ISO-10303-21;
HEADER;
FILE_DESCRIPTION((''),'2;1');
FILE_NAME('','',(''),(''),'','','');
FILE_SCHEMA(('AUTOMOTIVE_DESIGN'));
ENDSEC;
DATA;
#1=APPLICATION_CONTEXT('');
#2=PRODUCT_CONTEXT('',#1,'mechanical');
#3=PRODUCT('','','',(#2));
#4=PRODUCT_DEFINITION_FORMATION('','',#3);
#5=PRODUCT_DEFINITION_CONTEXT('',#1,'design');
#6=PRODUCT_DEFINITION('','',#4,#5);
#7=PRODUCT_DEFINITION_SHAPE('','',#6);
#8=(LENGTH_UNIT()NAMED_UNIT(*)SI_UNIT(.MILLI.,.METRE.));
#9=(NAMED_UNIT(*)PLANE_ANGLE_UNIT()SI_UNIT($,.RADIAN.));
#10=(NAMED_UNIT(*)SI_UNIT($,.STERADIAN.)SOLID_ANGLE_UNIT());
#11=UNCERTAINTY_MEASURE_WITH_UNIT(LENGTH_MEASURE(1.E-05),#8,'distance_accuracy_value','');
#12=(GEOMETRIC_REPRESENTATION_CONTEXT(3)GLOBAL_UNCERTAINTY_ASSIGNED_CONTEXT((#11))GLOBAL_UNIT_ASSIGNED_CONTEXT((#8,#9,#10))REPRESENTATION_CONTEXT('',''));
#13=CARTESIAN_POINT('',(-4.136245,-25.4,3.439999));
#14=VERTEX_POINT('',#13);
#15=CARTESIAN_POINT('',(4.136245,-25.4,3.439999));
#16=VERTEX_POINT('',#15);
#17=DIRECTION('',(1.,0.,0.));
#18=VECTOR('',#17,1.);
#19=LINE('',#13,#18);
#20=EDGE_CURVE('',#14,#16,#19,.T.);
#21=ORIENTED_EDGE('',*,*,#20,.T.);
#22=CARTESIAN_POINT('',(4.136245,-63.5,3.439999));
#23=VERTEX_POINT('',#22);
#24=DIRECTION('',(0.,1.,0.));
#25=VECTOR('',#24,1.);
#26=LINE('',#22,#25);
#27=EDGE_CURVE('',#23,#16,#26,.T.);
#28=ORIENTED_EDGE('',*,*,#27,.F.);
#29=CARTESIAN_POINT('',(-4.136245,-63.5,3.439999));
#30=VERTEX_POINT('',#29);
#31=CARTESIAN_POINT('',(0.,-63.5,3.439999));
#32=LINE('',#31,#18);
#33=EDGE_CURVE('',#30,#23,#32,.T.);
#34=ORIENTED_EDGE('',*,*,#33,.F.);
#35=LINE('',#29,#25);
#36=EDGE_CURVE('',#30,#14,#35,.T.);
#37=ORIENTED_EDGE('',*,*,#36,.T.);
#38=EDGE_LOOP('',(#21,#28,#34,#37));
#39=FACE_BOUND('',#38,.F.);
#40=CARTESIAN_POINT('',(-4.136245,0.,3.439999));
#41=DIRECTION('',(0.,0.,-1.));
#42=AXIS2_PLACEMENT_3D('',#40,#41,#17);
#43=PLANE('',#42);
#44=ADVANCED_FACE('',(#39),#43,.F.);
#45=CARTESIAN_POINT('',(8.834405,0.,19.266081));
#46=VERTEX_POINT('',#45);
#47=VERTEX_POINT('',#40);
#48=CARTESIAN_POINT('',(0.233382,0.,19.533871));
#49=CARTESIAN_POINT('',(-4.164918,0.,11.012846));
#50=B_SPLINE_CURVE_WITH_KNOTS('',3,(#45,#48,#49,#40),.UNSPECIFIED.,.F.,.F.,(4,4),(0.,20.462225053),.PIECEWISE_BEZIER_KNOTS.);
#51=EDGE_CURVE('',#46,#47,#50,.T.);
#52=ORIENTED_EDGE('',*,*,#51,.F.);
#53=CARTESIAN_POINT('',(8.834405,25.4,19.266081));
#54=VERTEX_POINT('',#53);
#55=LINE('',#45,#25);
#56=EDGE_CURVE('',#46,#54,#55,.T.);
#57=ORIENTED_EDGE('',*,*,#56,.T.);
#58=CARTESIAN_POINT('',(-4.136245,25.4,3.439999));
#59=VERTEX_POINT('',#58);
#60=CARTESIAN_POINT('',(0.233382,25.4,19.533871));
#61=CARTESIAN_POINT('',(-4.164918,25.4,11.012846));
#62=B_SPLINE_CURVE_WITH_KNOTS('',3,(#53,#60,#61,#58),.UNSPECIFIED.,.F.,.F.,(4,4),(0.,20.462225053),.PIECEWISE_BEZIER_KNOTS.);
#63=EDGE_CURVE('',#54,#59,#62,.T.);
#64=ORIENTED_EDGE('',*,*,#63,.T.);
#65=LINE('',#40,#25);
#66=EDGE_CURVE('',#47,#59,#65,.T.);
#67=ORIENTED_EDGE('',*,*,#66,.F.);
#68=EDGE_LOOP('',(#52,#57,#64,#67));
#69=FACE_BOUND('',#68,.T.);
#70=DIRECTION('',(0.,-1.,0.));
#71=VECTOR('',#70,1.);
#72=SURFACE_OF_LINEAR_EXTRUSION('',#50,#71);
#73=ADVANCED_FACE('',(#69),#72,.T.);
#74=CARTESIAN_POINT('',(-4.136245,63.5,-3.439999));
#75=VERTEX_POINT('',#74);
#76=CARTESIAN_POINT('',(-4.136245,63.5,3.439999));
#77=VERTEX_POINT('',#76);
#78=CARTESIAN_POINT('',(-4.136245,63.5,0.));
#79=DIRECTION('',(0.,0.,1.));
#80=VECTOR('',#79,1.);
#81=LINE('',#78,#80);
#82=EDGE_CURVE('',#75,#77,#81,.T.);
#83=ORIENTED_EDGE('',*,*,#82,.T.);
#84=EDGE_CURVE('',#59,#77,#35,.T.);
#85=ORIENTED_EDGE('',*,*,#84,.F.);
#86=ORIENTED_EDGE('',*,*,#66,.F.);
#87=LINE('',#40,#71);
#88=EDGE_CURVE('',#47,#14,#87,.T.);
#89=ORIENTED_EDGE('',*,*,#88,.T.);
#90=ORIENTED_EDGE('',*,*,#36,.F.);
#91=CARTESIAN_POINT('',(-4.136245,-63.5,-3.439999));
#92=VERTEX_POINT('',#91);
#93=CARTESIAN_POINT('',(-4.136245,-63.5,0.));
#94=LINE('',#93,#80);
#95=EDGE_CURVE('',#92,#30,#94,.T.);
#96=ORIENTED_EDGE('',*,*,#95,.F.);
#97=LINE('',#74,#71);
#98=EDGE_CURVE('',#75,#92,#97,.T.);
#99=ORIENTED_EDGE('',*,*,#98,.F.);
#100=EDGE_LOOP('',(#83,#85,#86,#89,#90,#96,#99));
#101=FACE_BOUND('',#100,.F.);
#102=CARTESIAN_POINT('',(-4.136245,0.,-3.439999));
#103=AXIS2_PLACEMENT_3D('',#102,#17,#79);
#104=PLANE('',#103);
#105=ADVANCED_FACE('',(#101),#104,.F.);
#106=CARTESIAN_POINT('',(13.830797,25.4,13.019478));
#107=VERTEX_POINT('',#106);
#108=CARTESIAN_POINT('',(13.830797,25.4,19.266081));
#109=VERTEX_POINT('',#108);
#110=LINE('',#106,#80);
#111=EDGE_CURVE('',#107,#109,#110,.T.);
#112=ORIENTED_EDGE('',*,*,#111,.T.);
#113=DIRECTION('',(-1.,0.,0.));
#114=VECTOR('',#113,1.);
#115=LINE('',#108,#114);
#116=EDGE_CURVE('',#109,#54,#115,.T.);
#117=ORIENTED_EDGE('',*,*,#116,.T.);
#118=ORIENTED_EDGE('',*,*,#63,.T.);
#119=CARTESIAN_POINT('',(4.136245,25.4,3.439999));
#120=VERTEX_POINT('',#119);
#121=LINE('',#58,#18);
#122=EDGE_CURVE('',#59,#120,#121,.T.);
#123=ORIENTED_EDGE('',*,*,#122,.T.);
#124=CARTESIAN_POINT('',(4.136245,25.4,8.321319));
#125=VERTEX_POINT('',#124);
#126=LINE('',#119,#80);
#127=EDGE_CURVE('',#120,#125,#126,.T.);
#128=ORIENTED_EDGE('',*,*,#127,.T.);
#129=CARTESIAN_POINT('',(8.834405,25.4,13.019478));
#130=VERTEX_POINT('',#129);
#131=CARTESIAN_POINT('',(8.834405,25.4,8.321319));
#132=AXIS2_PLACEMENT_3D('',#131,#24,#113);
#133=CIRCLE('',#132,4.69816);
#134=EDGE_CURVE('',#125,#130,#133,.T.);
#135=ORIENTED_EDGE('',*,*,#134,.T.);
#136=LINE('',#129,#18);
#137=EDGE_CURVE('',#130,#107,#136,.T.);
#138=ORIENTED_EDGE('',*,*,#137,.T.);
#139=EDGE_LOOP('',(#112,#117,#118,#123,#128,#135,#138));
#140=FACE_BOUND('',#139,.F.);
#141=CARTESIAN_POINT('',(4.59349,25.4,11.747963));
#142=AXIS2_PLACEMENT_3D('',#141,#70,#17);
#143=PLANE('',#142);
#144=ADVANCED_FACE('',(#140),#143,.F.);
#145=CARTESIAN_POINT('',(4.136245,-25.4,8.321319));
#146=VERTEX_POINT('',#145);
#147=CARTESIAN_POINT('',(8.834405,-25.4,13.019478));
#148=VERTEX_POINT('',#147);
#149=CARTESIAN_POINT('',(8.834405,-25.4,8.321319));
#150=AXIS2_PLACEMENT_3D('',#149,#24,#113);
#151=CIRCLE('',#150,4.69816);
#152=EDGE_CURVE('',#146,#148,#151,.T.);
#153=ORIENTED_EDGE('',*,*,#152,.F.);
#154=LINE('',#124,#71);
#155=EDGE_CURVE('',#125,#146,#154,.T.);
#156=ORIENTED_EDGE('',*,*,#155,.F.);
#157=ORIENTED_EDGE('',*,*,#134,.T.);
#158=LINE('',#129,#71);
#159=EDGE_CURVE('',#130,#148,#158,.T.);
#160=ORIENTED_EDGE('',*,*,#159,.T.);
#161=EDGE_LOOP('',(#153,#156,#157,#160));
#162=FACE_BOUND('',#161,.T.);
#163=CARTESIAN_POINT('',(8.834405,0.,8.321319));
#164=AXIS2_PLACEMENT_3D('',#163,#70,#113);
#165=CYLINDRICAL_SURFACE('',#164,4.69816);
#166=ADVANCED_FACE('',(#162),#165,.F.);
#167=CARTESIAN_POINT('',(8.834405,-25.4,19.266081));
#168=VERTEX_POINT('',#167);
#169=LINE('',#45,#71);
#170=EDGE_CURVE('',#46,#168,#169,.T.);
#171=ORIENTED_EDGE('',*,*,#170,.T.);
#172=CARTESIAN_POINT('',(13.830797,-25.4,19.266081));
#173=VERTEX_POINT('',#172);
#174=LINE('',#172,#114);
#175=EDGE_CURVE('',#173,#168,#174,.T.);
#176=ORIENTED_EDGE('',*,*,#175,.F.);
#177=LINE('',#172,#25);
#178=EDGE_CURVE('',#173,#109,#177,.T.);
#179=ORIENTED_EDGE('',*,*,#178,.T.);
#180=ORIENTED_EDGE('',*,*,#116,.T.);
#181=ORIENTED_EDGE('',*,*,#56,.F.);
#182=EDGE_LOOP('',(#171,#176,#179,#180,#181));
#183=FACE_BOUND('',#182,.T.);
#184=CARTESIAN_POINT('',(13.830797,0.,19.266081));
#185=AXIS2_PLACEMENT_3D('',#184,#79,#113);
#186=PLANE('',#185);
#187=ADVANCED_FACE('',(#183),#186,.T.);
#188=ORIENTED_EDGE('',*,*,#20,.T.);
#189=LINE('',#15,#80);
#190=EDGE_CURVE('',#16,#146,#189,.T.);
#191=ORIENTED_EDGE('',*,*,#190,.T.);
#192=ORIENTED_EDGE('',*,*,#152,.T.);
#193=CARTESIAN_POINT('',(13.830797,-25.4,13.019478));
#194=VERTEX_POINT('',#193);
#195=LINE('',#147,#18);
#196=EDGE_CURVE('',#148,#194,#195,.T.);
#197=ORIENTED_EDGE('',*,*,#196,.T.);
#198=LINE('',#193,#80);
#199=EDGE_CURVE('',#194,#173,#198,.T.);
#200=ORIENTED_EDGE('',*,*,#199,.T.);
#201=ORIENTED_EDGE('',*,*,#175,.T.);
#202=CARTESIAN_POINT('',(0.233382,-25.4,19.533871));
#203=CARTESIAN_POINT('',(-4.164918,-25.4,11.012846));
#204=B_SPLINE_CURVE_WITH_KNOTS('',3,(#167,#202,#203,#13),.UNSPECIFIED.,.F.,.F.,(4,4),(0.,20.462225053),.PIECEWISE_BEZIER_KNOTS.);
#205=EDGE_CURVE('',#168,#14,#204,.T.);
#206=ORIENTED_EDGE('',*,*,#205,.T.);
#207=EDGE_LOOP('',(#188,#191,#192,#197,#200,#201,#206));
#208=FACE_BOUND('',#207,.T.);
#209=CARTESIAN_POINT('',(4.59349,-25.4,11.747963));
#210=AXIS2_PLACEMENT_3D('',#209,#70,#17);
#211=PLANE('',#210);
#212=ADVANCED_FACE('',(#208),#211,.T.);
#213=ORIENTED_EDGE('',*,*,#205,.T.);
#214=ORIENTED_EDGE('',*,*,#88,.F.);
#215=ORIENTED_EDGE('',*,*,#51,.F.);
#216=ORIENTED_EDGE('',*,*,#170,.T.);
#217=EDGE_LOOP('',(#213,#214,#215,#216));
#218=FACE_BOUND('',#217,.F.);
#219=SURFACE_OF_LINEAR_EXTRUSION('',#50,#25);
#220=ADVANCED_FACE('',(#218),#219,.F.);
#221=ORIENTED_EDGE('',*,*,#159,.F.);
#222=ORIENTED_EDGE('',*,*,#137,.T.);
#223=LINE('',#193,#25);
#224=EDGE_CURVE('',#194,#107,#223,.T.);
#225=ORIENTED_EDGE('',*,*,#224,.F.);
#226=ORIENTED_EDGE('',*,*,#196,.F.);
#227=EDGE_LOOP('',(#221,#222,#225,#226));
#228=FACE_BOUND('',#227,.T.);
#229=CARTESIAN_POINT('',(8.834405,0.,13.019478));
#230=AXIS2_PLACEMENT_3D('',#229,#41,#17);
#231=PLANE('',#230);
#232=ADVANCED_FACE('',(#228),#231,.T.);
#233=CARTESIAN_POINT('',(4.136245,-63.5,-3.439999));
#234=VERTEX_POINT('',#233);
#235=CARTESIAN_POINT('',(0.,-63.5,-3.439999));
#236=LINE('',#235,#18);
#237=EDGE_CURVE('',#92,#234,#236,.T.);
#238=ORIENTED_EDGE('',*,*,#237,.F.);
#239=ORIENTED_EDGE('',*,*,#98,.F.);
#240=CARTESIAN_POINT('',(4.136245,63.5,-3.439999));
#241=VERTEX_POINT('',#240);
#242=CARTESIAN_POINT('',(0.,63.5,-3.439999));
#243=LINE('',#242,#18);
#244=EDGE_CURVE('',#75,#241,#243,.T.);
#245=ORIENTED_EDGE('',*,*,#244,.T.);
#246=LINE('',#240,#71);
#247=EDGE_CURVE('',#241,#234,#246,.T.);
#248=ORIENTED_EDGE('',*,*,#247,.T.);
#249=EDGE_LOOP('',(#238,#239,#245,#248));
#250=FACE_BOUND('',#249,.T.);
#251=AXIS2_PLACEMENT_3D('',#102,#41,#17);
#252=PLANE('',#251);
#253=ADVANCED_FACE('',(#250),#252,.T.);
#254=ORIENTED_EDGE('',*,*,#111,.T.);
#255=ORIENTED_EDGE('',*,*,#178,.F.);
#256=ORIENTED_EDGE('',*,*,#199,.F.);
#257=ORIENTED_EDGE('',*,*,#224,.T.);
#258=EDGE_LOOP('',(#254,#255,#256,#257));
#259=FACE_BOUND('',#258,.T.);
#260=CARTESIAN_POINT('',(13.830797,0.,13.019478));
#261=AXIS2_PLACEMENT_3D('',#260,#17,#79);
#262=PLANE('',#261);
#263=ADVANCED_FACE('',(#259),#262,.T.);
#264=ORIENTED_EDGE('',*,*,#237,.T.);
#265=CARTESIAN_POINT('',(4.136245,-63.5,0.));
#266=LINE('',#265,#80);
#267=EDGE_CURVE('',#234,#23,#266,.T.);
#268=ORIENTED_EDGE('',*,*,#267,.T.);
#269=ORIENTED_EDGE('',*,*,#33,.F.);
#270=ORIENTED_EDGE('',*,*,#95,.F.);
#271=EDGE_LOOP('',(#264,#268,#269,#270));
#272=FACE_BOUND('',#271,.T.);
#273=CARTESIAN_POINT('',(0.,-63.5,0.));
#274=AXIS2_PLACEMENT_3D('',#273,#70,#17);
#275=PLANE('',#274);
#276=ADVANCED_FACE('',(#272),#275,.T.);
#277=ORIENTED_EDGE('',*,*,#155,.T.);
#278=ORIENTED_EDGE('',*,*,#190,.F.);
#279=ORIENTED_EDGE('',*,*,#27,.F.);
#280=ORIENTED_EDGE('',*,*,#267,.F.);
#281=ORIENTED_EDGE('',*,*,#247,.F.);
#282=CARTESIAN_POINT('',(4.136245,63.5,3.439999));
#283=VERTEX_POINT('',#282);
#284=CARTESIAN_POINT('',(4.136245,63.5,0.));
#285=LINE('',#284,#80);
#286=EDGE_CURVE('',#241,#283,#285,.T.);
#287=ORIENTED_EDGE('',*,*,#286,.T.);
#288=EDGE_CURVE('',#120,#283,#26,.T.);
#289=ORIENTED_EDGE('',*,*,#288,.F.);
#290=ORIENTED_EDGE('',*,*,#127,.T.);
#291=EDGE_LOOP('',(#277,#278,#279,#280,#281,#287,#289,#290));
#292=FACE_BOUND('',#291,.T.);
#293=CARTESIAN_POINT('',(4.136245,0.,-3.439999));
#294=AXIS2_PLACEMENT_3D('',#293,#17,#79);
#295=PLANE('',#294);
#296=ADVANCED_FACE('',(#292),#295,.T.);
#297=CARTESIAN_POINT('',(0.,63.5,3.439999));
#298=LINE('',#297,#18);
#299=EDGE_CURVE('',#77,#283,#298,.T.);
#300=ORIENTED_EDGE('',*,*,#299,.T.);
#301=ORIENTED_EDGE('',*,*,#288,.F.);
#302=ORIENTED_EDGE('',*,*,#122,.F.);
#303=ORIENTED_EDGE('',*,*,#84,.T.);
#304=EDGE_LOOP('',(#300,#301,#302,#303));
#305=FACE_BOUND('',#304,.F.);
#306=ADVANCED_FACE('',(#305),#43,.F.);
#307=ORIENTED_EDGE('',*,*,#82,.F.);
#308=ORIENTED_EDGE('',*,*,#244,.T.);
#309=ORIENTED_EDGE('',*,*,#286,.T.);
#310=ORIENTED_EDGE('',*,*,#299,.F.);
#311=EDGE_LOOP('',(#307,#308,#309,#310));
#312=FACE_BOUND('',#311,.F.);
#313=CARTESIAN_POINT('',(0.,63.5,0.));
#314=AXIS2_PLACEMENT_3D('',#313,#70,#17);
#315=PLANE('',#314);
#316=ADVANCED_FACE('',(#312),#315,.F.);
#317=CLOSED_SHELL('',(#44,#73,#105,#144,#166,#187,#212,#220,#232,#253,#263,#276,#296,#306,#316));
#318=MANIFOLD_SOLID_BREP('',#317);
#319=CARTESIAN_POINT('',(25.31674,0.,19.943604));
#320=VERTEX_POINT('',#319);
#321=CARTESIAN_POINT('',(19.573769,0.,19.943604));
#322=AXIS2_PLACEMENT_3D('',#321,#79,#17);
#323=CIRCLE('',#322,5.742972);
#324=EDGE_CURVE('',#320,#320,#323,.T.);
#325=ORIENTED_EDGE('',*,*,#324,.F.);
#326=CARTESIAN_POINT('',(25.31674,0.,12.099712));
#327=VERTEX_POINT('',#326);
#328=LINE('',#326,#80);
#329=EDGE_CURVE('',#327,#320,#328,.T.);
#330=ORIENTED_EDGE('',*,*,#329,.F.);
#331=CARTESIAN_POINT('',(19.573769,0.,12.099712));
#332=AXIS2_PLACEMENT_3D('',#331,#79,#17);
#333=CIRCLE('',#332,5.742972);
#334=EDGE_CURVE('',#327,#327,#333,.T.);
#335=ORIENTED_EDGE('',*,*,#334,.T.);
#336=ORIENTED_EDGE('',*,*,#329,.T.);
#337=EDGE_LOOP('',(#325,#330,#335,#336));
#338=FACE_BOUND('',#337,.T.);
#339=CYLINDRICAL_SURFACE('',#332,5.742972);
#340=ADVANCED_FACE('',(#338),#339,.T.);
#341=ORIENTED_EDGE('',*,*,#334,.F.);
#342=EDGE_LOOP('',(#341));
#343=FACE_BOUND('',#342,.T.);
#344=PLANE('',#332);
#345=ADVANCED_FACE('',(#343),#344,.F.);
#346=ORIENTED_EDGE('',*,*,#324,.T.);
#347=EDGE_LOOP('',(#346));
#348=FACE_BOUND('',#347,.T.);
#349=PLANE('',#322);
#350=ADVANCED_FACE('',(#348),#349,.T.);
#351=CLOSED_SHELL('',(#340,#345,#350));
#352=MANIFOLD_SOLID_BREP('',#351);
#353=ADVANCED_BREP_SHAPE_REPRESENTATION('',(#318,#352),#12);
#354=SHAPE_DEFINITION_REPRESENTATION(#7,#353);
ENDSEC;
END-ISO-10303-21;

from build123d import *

# Parameters (mm, degrees)
F0_W     = 8.2724904759
F0_H     = 6.8799975622
F1_DEPTH = 63.5
F2_DEPTH = 25.4


with BuildPart() as f1:
    # F0 (on Front) → F1 (new body, symmetric)
    with BuildSketch(Plane.XZ):
        Rectangle(F0_W, F0_H)
    extrude(amount=F1_DEPTH, both=True)

    # F0 (on Front) → F2 (join, symmetric)
    with BuildSketch(Plane.XZ):
        with BuildLine():
            add(Edge.make_bspline(
                [(8.8344048709, 19.2660813623), (0.2333819866, 19.5338707417), (-4.1649181363, 11.0128456192), (-4.1362452379, 3.4399987811)],
                knots=[0, 0, 0, 0, 20.4622250528, 20.4622250528, 20.4622250528, 20.4622250528], degree=3))
            Line((-4.1362452379, 3.4399987811), (4.1362452379, 3.4399987811))
            Line((4.1362452379, 3.4399987811), (4.1362452379, 8.3213185052))
            ThreePointArc((4.1362452379, 8.3213185052), (5.5123043353, 11.6434190407), (8.8344048709, 13.0194781381))
            Line((8.8344048709, 13.0194781381), (13.8307970829, 13.0194781381))
            Line((13.8307970829, 13.0194781381), (13.8307970829, 16.8308063556))
            Line((13.8307970829, 16.8308063556), (13.8307970829, 19.2660813623))
            Line((13.8307970829, 19.2660813623), (8.8344048709, 19.2660813623))
        make_face()
    extrude(amount=F2_DEPTH, both=True)


with BuildPart() as f3:
    # F0 (on Front) → F3 (revolve)
    with BuildSketch(Plane.XZ):
        Polygon((19.5737686008, 19.9436039542), (19.5737686008, 19.2660813623), (19.5737686008, 17.6438695487), (19.5737686008, 16.0216577351), (19.5737686008, 16.0211566895), (19.5737686008, 13.0194781381), (19.5737686008, 12.099711516), (25.3167401188, 12.099711516), (25.3167401188, 19.9436039542), align=None)
    revolve(axis=Axis((19.5737686008, 0, 17.6438695487), (0, 0, 1)))


solid = Compound([f1.part, f3.part])
